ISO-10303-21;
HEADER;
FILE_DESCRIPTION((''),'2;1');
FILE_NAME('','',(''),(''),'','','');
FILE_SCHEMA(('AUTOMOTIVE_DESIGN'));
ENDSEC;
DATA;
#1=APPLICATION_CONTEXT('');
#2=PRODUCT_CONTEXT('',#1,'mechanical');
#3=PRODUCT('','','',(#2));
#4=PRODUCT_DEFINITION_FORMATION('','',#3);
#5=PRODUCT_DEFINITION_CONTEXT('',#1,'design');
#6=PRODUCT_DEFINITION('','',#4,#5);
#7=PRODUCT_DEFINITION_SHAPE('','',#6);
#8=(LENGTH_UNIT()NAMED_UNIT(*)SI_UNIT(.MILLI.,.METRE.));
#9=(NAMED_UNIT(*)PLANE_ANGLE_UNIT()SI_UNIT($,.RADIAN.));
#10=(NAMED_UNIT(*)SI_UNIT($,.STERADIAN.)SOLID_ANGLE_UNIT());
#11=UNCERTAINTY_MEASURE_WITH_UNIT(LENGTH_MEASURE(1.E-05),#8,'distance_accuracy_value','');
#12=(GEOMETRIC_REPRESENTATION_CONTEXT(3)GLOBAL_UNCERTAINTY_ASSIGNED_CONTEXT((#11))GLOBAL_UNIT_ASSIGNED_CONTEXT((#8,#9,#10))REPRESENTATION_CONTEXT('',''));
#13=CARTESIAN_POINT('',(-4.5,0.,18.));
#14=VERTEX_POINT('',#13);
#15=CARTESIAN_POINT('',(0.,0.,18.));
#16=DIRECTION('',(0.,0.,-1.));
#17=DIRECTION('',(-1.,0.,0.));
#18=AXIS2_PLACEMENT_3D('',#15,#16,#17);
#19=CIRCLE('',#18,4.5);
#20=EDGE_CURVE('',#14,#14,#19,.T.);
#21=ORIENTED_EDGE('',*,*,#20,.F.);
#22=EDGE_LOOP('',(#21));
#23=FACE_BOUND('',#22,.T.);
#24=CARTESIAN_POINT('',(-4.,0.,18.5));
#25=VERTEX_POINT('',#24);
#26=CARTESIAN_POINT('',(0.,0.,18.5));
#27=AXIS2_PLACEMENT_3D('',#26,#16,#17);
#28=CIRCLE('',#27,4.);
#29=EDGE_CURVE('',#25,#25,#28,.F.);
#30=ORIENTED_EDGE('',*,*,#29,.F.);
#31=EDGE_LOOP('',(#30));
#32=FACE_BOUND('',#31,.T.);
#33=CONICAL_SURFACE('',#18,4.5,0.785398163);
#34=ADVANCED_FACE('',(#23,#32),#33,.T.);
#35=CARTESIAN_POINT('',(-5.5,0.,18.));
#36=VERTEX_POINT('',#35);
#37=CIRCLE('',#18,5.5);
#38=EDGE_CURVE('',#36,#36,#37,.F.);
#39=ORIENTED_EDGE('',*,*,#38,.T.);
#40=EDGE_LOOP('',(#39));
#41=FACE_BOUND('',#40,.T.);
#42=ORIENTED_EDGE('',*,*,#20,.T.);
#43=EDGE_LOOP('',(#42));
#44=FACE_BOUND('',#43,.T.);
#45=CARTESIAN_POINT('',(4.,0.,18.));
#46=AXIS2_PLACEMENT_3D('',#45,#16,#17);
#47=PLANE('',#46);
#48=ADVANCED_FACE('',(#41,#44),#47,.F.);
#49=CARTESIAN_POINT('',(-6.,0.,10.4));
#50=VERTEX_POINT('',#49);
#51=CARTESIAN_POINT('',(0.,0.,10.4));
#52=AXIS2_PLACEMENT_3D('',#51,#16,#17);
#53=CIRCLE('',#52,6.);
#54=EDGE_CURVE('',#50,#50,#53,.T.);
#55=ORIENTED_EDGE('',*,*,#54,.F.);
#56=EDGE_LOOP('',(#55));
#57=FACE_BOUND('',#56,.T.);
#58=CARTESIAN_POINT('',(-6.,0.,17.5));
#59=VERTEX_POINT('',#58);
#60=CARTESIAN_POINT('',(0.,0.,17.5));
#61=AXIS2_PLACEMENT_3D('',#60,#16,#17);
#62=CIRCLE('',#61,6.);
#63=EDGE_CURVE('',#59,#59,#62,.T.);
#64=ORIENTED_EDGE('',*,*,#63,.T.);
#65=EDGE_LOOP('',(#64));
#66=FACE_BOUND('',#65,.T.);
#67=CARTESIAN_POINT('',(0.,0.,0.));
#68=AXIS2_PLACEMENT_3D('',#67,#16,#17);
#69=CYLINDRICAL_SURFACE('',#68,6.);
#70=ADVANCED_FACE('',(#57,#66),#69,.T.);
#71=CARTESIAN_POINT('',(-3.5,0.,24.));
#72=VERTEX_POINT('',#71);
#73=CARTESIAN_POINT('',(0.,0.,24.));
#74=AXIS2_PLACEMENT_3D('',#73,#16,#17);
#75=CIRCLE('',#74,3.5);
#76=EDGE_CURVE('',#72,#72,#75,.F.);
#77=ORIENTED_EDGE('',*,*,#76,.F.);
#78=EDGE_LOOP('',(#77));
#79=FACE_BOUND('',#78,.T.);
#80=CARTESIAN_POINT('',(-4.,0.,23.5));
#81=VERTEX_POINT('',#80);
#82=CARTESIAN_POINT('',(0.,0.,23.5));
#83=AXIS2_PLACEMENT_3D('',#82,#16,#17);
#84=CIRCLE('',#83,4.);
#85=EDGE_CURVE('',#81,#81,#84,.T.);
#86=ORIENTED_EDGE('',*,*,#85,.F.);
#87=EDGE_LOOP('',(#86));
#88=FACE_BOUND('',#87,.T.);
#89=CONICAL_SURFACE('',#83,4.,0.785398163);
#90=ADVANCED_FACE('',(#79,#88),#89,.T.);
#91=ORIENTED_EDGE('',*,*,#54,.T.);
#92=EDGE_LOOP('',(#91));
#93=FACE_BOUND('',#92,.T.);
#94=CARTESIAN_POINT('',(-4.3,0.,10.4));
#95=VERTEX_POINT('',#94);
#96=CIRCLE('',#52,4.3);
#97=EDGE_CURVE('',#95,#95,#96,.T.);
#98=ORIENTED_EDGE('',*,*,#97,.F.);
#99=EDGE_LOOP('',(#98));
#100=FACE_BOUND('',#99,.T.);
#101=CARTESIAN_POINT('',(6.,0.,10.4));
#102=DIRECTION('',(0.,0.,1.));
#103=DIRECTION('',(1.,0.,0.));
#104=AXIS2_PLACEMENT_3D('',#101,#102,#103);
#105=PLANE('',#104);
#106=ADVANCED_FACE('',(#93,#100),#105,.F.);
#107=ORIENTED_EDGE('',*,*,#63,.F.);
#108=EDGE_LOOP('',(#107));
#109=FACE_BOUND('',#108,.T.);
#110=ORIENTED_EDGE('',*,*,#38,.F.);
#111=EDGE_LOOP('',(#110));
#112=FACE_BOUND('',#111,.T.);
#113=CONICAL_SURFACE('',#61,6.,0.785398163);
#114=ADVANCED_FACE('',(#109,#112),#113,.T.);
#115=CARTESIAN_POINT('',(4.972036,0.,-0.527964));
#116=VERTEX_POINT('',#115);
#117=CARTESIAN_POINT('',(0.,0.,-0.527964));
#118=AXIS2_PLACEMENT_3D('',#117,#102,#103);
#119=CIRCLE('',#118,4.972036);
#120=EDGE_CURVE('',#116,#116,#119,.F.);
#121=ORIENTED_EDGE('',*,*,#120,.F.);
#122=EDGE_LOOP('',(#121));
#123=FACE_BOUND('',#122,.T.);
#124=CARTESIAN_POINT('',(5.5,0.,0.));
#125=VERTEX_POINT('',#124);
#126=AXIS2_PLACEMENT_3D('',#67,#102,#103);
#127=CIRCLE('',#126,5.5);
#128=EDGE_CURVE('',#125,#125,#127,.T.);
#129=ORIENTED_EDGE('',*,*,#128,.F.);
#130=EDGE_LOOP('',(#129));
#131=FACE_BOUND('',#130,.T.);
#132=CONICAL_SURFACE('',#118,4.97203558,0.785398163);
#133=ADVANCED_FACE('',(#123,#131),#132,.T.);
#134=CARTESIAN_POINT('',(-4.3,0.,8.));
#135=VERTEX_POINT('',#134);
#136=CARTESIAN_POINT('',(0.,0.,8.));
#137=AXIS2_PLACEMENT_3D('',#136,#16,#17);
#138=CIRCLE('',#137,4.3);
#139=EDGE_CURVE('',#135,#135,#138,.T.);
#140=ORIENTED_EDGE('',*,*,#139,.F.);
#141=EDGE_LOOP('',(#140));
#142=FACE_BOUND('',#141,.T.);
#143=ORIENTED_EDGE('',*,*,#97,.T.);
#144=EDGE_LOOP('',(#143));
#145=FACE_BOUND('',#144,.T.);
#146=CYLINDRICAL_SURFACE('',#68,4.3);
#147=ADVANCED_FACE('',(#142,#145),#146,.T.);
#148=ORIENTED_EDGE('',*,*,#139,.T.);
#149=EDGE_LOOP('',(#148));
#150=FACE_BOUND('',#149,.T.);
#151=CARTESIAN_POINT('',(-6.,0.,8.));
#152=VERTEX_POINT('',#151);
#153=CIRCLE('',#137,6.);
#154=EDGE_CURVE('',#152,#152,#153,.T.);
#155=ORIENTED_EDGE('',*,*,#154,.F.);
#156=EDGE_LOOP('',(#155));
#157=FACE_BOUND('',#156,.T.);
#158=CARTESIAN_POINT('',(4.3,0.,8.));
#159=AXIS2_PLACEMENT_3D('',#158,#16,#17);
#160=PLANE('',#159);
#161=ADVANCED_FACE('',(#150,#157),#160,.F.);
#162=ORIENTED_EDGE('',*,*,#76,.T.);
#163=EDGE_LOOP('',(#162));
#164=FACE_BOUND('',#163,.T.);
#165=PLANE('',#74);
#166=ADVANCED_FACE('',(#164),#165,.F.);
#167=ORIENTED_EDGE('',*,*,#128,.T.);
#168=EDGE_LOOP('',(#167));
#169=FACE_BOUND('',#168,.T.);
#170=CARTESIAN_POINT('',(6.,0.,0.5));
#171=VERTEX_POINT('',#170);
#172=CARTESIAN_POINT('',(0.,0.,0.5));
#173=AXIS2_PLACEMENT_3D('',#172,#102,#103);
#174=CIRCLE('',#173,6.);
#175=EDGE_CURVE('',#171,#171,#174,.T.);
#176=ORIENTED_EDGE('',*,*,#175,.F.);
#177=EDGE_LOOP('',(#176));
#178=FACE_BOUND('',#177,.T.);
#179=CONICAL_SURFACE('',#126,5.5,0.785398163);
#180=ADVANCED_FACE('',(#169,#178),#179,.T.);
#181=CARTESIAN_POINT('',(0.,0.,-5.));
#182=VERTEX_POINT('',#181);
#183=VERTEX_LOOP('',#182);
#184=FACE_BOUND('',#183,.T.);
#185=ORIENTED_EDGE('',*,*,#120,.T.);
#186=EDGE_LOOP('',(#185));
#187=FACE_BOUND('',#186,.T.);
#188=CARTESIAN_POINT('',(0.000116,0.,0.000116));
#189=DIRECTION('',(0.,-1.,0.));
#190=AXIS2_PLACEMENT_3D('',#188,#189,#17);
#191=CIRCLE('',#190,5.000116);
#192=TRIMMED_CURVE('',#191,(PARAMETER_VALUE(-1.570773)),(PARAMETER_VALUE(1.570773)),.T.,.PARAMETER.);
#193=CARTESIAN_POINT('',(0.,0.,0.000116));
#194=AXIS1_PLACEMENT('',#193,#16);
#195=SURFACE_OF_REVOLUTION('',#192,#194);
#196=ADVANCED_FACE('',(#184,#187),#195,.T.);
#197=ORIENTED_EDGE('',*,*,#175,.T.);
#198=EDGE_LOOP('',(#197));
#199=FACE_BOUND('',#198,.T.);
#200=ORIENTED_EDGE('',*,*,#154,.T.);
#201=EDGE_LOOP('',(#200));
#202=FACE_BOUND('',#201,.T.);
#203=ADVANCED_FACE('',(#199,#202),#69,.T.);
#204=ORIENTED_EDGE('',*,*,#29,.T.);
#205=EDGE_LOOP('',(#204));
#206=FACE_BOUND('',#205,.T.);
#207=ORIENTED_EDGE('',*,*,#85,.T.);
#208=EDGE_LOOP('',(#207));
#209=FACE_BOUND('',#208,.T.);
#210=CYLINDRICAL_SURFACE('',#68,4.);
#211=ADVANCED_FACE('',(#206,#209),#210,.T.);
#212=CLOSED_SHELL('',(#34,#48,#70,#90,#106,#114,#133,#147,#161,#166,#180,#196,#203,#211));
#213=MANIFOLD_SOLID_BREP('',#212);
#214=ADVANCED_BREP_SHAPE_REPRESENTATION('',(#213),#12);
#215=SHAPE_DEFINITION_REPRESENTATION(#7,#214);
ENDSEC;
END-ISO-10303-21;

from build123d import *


with BuildPart() as part:
    # Sketch_plunger → Rev_plunger (revolve)
    with BuildSketch(Plane(origin=(0, 0, 0), x_dir=(1, 0, 0), z_dir=(0, 1, 0)), mode=Mode.PRIVATE) as rev_plunger_sk:
        with BuildLine():
            Line((0, 5), (0, -24))
            Line((0, -24), (4, -24))
            Line((4, -24), (4, -18))
            Line((4, -18), (6, -18))
            Line((6, -18), (6, -10.4))
            Line((6, -10.4), (4.3, -10.4))
            Line((4.3, -10.4), (4.3, -8))
            Line((4.3, -8), (6, -8))
            Line((6, -8), (6, 0))
            Line((6, 0), (5, 0))
            ThreePointArc((5, 0), (3.5355, 3.5355), (0, 5))
        make_face()
    revolve(rev_plunger_sk.sketch.rotate(Axis((0, 0, 0), (0, 0, 1)), 180), axis=Axis((0, 0, 0), (0, 0, 1)))

    # Chamfer_C05: read off the stored shape, not the designer's step
    # Chamfer_C05 outline → Chamfer_C05 (revolve, cut)
    with BuildSketch(Plane.XZ):
        Polygon((3.5, 24), (4, 23.5), (4, 24), align=None)
        Polygon((6, 18), (5.5, 18), (6, 17.5), align=None)
        Polygon((6, -0.52796442), (6, 0.5), (5.5, 0), (5.5, -0.52796442), align=None)
    revolve(axis=Axis((0, 0, 0), (0, 0, 1)), mode=Mode.SUBTRACT)

    # Chamfer_C05 2 outline → Chamfer_C05 2 (revolve)
    with BuildSketch(Plane.XZ):
        Polygon((4.5, 18), (4, 18.5), (4, 18), align=None)
        Polygon((5.5, 0.5), (4.97203558, 0.5), (4.97203558, -0.52796442), (5.5, 0), align=None)
    revolve(axis=Axis((0, 0, 0), (0, 0, 1)))

    # Chamfer_C05 3 outline → Chamfer_C05 3 (revolve)
    with BuildSketch(Plane.XZ):
        Polygon((5.5, 0.5), (5.5, 0), (6, 0.5), align=None)
    revolve(axis=Axis((0, 0, 0), (0, 0, 1)))


solid = part.part
